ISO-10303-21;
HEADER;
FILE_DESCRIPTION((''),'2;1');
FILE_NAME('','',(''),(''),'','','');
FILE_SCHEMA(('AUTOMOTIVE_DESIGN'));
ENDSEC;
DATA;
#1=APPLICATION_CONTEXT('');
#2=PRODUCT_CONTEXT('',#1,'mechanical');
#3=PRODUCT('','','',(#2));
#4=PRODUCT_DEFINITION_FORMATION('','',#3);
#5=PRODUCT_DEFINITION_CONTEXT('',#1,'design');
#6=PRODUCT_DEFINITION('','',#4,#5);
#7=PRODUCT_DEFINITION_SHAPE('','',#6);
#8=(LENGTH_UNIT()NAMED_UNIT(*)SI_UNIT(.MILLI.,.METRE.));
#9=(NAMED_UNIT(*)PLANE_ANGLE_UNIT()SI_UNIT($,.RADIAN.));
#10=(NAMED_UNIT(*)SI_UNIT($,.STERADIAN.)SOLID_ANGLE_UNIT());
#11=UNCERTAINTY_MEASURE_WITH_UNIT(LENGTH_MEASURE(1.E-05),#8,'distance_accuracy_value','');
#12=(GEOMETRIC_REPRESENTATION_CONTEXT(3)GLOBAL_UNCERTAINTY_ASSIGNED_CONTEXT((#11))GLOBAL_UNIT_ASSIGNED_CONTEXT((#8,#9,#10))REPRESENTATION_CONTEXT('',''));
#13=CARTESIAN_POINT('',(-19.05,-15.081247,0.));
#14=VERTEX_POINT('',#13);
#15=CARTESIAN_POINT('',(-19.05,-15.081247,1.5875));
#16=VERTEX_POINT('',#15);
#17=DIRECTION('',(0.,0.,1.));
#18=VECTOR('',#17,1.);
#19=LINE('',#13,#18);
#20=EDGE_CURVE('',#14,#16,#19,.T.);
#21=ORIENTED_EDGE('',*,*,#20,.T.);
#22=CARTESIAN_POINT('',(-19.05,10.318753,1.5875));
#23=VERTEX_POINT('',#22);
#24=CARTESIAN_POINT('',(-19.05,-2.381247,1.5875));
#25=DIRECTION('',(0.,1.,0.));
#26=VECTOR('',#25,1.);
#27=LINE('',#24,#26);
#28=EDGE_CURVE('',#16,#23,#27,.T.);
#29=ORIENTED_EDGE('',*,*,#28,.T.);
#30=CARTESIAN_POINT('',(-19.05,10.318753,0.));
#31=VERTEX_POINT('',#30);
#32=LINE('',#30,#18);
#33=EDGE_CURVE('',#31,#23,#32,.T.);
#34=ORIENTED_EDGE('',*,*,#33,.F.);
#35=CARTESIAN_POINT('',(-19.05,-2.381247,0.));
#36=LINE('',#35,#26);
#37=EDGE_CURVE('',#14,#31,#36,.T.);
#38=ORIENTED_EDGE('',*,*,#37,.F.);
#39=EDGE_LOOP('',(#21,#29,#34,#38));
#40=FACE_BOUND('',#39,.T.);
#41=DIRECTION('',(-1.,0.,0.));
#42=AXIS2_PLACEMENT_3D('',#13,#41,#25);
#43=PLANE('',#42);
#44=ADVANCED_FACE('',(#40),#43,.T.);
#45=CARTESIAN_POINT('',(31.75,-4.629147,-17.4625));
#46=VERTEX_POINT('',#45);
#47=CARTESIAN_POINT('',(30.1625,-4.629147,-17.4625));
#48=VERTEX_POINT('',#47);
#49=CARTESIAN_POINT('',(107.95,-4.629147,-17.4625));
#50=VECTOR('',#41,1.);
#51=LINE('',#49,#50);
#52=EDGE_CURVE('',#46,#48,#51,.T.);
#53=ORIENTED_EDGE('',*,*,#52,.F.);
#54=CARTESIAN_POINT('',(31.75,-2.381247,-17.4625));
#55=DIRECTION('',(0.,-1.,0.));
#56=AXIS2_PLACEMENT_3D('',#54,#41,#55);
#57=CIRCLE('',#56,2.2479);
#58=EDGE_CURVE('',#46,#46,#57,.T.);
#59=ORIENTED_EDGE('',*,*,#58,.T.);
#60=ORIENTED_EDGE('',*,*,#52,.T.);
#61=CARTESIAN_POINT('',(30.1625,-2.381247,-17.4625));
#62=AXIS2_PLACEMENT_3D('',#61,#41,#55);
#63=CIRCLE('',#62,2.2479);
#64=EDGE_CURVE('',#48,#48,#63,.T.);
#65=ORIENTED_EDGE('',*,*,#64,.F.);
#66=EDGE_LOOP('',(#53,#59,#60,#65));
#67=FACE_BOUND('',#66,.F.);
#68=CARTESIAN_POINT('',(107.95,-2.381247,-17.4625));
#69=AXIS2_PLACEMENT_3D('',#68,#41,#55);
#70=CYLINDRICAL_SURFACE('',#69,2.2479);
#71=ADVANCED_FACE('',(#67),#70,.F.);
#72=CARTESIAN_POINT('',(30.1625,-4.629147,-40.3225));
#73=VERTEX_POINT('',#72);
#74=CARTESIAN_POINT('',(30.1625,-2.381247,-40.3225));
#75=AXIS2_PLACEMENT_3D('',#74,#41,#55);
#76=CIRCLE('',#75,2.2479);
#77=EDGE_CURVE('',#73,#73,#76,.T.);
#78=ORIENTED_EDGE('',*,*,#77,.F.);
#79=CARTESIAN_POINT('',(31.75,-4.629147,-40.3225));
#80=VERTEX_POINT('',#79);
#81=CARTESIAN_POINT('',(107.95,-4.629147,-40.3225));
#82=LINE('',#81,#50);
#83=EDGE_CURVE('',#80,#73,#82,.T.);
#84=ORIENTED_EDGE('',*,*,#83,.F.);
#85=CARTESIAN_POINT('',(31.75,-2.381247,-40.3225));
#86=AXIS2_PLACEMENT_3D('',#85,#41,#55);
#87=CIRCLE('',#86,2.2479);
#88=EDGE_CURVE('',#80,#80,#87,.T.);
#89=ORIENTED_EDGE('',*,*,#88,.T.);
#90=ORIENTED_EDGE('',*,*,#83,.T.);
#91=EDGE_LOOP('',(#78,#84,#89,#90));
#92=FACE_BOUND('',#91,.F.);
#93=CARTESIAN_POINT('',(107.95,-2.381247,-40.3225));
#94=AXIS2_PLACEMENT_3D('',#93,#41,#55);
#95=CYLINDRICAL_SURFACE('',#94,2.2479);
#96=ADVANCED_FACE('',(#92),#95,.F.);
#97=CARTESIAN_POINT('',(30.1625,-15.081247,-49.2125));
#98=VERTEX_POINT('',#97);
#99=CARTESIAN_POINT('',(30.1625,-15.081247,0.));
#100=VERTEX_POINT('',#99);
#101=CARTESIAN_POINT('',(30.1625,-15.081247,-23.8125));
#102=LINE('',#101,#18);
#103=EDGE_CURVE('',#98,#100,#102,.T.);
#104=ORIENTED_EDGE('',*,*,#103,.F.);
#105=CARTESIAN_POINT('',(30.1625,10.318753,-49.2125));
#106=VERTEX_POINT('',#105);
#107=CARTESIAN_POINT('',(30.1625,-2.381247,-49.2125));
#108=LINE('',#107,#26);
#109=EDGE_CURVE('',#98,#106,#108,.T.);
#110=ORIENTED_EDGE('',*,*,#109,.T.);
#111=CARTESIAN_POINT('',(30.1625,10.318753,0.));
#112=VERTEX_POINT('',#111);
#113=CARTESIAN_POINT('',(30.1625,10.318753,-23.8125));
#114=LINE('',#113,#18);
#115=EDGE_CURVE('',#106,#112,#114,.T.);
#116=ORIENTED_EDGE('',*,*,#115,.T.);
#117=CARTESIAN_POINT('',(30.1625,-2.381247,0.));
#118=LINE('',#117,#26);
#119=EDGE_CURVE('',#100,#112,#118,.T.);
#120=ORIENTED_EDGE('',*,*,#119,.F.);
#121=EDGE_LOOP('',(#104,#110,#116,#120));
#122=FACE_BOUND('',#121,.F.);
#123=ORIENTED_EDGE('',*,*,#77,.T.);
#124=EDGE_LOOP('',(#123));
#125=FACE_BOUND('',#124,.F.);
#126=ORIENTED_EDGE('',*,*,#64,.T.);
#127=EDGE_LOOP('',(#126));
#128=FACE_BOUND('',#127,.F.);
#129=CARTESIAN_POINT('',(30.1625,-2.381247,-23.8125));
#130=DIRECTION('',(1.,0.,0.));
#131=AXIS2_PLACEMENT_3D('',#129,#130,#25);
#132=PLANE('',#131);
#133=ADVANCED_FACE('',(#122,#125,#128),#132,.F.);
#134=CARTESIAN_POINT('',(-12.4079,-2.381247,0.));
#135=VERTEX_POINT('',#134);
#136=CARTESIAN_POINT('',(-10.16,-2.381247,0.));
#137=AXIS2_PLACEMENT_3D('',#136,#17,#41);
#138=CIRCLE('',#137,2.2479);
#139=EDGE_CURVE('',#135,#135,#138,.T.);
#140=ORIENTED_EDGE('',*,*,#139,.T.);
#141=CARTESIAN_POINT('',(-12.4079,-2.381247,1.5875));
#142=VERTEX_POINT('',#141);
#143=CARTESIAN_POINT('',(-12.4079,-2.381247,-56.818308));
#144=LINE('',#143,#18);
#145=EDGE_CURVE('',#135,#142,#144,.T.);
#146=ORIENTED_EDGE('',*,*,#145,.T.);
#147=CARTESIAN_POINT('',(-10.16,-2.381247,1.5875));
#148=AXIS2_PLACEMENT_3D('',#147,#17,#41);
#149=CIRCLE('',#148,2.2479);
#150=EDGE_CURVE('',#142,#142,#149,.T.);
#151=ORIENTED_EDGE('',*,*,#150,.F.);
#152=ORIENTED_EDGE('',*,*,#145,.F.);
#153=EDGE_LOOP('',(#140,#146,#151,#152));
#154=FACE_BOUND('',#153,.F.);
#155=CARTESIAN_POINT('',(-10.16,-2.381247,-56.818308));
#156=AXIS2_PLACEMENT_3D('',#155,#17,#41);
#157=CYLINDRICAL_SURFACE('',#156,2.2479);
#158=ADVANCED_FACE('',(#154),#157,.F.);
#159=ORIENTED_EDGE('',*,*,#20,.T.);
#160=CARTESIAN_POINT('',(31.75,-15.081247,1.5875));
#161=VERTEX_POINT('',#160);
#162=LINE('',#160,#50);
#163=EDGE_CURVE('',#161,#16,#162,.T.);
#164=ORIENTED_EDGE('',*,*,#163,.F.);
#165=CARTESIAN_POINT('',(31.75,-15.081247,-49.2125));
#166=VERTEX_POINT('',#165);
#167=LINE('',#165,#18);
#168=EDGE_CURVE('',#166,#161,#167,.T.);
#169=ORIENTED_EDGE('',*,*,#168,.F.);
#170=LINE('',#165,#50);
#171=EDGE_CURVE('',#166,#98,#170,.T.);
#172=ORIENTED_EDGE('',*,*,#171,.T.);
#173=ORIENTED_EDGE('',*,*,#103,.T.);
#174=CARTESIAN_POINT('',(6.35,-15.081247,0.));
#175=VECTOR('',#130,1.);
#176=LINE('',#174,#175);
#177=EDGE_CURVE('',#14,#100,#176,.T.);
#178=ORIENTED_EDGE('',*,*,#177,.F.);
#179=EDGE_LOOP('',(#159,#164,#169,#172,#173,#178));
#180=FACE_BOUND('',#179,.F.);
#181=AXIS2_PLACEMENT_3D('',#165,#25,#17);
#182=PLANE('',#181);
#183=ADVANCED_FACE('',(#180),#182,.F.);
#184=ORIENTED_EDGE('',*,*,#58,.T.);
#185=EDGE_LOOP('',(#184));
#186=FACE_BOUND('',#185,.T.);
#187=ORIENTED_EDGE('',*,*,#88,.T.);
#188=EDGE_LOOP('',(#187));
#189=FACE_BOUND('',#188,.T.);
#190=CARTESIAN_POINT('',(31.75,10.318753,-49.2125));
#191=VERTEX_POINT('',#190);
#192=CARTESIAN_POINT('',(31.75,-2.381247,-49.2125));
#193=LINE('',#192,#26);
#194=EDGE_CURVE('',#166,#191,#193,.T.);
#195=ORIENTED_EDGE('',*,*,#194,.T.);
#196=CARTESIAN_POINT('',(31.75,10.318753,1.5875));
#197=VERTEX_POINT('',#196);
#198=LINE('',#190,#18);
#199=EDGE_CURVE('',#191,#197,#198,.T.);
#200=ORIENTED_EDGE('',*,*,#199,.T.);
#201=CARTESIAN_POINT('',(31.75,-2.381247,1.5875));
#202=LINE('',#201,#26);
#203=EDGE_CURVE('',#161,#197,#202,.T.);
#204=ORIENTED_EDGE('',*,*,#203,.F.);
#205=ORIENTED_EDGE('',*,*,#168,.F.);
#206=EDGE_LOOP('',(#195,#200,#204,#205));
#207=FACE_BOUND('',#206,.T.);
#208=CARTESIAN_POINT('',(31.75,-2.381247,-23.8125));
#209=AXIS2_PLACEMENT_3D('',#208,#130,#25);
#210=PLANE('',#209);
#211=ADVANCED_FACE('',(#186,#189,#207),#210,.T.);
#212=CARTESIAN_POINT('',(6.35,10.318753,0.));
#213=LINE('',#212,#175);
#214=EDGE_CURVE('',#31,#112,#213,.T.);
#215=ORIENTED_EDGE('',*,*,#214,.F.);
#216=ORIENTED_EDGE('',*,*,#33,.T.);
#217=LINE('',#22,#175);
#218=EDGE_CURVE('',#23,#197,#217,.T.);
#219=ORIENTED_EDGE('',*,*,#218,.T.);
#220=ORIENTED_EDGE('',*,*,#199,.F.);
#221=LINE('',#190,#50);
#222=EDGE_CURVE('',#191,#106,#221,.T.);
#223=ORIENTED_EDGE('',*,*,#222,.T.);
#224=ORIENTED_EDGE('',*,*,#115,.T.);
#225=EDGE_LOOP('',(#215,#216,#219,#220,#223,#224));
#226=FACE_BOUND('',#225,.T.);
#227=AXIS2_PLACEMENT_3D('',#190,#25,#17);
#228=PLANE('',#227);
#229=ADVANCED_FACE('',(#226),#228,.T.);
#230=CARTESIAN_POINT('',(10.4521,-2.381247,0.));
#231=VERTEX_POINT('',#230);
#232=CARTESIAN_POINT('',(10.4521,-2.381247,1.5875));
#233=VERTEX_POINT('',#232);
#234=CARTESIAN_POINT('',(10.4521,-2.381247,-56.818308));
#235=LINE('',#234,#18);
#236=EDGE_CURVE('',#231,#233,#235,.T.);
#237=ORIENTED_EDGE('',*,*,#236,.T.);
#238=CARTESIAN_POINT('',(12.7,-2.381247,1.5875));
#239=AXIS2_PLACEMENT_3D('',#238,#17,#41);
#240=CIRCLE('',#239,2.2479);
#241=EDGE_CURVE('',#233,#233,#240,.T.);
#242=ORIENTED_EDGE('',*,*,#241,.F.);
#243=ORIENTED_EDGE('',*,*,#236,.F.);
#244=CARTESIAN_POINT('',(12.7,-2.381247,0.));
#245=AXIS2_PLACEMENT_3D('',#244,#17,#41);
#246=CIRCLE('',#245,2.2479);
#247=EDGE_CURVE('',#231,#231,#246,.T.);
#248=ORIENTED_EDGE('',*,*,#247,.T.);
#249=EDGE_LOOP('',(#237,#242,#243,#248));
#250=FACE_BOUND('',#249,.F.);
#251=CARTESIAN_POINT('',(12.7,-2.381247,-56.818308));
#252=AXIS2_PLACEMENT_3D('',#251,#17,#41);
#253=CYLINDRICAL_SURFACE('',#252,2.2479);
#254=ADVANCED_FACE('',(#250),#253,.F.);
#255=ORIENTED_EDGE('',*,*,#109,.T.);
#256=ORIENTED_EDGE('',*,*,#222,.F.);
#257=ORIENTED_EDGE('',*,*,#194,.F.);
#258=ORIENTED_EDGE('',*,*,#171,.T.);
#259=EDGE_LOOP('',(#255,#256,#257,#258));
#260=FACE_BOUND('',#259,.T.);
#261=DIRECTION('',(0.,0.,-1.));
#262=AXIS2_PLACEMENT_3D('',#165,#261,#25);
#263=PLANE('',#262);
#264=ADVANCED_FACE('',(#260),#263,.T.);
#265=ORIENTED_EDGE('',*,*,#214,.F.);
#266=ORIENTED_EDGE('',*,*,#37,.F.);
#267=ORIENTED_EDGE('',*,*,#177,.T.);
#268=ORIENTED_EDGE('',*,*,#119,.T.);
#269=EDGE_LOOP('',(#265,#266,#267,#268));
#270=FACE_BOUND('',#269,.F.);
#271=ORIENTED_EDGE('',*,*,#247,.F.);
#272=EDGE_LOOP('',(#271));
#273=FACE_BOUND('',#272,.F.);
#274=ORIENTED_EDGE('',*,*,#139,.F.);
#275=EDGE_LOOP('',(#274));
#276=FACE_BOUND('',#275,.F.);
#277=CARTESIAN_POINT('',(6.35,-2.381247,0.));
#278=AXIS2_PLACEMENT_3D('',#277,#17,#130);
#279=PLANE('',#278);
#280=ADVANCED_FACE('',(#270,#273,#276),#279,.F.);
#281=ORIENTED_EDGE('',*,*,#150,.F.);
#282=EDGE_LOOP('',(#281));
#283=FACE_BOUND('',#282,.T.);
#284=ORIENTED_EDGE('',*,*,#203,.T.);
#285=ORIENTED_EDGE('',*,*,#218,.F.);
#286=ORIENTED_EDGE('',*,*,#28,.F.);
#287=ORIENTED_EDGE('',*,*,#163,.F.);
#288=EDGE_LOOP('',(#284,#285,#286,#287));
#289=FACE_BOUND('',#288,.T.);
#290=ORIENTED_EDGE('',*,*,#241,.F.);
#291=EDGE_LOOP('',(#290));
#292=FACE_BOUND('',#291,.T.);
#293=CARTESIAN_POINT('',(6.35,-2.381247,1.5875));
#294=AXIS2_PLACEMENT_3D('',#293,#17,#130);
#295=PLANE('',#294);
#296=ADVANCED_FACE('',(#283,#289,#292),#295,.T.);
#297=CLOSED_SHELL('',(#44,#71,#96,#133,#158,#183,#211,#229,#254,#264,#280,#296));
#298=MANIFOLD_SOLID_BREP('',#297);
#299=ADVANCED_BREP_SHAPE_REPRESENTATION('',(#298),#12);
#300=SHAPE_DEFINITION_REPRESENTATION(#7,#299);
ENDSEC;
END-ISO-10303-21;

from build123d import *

# Parameters (mm, degrees)
F0_W     = 50.8
F0_H     = 25.4
F1_DEPTH = 1.5875
F2_D     = 4.4958
F3_W     = 25.4
F3_H     = 50.8
F4_DEPTH = 1.5875
F5_D     = 4.4958


# Not quite as in the source:
# - a length typed as a fraction of an inch, garbled in the dataset ("3 / 203.2 mm" for 3/8 in), is restored


with BuildPart() as f1:
    # F0 (on Top) → F1 (new body)
    with BuildSketch(Plane.XY):
        with Locations((6.3499998267, -2.3812473148)):
            Rectangle(F0_W, F0_H)
    extrude(amount=F1_DEPTH)

    # F2 (through all)
    with Locations(Plane(origin=(0, 0, 0), x_dir=(1, 0, 0), z_dir=(0, 0, -1))):
        with Locations((-10.1600001733, 2.3812473148), (12.6999998267, 2.3812473148)):
            Hole(F2_D / 2)

    # F3 (on face) → F4 (join)
    with BuildSketch(Plane.YZ.offset(31.7499998267)):
        with Locations((-2.3812473148, -23.8125)):
            Rectangle(F3_W, F3_H)
    extrude(amount=-F4_DEPTH)

    # F5 (through all)
    with Locations(Plane.YZ.offset(31.7499998267)):
        with Locations((-2.3812473148, -17.4625), (-2.3812473148, -40.3225)):
            Hole(F5_D / 2)


solid = f1.part
